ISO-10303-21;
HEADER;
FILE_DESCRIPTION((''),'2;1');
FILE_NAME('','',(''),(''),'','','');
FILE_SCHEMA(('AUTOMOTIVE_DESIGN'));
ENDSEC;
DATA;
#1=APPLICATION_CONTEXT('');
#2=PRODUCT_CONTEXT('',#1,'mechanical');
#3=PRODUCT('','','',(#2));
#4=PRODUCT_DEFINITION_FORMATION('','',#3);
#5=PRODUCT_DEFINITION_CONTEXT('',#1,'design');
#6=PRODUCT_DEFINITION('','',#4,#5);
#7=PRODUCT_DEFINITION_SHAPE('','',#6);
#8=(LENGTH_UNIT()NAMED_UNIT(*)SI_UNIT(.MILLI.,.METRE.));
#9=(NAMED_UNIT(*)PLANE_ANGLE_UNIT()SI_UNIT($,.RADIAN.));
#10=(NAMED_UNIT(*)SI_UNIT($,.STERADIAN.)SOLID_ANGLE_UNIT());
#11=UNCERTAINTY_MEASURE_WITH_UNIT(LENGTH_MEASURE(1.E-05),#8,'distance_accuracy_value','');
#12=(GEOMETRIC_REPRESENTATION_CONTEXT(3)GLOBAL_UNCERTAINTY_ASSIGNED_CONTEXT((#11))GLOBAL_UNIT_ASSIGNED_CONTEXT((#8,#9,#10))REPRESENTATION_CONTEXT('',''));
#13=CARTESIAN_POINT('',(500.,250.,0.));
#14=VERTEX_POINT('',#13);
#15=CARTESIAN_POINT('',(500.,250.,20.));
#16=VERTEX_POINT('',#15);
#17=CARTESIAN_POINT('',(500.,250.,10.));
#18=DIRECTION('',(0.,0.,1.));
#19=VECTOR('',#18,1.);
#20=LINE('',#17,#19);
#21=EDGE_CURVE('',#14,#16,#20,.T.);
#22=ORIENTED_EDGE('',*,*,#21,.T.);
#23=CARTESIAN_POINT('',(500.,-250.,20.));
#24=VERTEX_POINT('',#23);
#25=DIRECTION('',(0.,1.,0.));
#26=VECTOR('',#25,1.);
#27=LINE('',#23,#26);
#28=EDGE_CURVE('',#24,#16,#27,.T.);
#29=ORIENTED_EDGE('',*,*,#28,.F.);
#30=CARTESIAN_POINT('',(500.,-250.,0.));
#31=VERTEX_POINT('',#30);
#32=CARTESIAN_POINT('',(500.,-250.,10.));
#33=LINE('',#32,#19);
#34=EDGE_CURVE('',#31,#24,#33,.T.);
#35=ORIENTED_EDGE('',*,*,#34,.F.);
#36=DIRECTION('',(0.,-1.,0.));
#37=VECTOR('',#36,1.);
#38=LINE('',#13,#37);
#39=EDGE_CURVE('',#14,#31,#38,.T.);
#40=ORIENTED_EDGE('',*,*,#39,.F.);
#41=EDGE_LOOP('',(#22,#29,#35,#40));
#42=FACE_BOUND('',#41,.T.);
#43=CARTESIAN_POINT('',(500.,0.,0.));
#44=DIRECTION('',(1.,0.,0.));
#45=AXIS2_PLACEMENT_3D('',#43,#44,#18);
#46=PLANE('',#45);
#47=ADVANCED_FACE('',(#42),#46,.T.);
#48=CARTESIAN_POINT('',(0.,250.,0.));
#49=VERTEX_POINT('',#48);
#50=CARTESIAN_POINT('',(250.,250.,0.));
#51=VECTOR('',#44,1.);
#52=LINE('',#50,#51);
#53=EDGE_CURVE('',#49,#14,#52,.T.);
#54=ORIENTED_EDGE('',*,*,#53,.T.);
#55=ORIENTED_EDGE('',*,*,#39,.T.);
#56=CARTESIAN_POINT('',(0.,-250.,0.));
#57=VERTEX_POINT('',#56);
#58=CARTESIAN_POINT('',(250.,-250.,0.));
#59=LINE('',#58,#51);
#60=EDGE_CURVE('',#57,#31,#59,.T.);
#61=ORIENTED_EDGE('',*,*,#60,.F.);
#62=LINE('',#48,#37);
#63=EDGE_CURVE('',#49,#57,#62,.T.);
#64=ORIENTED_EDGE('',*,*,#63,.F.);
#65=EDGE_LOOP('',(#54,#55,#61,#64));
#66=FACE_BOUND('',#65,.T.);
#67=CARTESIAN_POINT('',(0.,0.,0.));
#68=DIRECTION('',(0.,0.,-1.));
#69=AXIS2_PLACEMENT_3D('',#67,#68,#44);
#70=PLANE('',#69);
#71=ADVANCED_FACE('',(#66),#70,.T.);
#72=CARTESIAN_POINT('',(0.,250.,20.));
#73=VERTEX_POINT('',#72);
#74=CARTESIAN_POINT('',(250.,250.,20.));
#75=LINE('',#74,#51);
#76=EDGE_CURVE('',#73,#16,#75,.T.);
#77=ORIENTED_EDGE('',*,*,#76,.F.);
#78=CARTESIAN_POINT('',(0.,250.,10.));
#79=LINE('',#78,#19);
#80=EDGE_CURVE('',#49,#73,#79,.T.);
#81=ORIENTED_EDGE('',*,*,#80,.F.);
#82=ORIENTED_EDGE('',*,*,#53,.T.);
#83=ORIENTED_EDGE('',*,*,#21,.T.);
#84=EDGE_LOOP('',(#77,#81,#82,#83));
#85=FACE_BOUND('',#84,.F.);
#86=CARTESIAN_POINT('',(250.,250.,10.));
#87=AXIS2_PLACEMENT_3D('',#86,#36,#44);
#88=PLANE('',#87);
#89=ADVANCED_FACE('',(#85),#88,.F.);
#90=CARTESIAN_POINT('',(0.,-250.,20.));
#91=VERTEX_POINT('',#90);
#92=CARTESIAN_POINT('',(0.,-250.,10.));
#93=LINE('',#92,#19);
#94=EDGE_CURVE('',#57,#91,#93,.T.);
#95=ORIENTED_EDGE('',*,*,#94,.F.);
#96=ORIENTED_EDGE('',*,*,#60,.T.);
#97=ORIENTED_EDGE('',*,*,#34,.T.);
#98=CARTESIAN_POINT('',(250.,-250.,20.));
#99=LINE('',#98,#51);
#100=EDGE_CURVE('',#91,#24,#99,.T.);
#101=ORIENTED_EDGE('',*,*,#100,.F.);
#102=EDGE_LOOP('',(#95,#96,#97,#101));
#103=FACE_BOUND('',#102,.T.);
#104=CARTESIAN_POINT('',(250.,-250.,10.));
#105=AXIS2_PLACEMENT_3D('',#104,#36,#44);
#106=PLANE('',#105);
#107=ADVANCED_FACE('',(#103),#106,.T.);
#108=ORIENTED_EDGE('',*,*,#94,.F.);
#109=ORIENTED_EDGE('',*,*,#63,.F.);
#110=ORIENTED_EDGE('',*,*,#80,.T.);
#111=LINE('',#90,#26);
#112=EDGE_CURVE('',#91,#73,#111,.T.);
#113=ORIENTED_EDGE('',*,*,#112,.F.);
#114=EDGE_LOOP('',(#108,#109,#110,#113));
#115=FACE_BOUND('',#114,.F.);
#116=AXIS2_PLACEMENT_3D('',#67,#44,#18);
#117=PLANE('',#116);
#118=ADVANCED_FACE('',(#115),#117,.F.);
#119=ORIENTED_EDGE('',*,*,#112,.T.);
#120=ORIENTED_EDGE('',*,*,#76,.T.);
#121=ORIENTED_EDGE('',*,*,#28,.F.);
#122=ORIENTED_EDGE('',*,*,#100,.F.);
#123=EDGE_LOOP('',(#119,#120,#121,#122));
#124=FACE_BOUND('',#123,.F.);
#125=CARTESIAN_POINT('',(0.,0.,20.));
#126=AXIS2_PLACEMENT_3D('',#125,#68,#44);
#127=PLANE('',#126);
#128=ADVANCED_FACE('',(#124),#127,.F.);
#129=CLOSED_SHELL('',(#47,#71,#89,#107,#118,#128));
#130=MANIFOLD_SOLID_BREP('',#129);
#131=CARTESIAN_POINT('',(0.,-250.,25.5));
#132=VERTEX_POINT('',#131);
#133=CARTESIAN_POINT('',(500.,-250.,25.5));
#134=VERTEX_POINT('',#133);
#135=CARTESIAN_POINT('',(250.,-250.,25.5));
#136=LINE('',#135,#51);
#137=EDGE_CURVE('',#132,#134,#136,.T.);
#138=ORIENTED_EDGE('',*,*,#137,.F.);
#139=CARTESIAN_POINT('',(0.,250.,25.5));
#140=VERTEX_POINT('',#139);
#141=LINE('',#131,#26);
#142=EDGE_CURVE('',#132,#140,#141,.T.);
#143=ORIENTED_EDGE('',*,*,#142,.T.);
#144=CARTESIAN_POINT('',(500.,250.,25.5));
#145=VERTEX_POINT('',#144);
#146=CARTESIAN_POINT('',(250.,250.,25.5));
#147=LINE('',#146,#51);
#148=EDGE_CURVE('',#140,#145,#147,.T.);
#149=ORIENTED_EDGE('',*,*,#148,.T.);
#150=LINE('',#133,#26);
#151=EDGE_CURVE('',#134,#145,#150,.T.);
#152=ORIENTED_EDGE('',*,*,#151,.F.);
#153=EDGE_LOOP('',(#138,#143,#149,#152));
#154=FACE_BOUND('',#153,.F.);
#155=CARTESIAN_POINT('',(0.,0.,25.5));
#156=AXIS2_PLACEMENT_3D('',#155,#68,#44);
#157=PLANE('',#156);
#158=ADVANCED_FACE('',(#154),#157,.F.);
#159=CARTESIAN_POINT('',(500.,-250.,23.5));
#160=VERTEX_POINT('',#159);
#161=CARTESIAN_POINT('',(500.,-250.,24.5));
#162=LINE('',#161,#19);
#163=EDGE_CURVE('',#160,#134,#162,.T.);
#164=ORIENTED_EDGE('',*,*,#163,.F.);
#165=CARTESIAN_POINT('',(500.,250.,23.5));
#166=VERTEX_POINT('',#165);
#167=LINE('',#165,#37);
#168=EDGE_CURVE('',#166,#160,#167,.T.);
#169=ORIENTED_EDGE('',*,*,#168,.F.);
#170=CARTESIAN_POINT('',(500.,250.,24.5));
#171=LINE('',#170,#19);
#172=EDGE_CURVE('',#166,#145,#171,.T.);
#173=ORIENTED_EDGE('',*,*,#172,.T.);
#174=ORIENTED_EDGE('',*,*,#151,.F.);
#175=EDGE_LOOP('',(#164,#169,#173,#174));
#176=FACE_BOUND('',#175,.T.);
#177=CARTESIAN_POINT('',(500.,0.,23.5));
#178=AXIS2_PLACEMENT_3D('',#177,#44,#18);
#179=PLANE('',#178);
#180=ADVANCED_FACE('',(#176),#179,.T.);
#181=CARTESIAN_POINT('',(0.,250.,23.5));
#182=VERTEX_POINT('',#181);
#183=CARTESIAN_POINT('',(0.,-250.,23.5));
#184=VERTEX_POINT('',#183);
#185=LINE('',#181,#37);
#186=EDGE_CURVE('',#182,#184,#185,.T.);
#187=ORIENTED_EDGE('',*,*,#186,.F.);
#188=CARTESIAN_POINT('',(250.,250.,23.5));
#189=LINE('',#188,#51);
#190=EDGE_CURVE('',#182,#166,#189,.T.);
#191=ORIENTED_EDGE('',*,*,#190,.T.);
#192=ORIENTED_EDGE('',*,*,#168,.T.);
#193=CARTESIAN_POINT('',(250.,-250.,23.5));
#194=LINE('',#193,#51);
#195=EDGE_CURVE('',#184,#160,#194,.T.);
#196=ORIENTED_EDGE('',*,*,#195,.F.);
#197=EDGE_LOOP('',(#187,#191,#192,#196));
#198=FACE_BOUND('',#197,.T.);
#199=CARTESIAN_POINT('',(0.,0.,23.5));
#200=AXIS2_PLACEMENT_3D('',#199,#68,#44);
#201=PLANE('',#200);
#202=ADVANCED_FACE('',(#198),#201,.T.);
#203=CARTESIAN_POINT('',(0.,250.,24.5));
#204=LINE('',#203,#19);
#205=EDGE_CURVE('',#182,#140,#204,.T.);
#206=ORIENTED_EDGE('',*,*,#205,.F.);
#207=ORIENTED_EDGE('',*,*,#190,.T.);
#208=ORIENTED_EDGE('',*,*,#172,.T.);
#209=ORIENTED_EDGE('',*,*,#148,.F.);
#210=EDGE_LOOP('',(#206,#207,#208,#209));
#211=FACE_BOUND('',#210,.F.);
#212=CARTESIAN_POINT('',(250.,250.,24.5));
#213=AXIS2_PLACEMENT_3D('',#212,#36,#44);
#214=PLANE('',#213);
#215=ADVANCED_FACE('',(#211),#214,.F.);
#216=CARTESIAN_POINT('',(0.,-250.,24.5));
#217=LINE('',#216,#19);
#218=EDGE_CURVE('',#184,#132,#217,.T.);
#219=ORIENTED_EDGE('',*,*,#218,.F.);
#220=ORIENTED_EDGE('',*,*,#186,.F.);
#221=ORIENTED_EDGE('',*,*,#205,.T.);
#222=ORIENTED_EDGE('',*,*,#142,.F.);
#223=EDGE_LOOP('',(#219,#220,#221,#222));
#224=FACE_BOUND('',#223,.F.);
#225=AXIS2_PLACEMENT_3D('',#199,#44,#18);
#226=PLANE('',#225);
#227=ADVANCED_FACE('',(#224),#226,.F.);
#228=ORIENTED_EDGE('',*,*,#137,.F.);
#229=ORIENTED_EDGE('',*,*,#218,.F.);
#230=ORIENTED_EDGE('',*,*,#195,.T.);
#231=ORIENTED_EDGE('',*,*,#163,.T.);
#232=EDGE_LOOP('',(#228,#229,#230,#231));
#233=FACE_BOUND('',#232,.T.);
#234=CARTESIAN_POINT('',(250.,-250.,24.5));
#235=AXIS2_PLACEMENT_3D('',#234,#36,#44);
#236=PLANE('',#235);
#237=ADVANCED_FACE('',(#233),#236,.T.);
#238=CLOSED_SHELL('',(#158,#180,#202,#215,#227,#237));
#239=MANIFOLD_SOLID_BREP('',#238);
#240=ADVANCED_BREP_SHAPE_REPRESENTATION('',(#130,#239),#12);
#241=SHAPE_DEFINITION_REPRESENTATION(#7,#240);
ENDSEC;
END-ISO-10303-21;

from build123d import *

# Parameters (mm, degrees)
F0_W     = 500
F0_H     = 20
F1_DEPTH = 250
F6_W     = 500
F6_H     = 2
F7_DEPTH = 250


# Not quite as in the source:
# - the program builds the solid bodies; features that only make, move or delete a surface that nothing else refers to are left out


with BuildPart() as f1:
    # F0 (on Front) → F1 (new body, symmetric)
    with BuildSketch(Plane.XZ):
        with Locations((250, 10)):
            Rectangle(F0_W, F0_H)
    extrude(amount=F1_DEPTH, both=True)


with BuildPart() as f7:
    # F6 (on Front) → F7 (new body, symmetric)
    with BuildSketch(Plane.XZ):
        with Locations((250, 24.5)):
            Rectangle(F6_W, F6_H)
    extrude(amount=F7_DEPTH, both=True)


solid = Compound([f1.part, f7.part])
